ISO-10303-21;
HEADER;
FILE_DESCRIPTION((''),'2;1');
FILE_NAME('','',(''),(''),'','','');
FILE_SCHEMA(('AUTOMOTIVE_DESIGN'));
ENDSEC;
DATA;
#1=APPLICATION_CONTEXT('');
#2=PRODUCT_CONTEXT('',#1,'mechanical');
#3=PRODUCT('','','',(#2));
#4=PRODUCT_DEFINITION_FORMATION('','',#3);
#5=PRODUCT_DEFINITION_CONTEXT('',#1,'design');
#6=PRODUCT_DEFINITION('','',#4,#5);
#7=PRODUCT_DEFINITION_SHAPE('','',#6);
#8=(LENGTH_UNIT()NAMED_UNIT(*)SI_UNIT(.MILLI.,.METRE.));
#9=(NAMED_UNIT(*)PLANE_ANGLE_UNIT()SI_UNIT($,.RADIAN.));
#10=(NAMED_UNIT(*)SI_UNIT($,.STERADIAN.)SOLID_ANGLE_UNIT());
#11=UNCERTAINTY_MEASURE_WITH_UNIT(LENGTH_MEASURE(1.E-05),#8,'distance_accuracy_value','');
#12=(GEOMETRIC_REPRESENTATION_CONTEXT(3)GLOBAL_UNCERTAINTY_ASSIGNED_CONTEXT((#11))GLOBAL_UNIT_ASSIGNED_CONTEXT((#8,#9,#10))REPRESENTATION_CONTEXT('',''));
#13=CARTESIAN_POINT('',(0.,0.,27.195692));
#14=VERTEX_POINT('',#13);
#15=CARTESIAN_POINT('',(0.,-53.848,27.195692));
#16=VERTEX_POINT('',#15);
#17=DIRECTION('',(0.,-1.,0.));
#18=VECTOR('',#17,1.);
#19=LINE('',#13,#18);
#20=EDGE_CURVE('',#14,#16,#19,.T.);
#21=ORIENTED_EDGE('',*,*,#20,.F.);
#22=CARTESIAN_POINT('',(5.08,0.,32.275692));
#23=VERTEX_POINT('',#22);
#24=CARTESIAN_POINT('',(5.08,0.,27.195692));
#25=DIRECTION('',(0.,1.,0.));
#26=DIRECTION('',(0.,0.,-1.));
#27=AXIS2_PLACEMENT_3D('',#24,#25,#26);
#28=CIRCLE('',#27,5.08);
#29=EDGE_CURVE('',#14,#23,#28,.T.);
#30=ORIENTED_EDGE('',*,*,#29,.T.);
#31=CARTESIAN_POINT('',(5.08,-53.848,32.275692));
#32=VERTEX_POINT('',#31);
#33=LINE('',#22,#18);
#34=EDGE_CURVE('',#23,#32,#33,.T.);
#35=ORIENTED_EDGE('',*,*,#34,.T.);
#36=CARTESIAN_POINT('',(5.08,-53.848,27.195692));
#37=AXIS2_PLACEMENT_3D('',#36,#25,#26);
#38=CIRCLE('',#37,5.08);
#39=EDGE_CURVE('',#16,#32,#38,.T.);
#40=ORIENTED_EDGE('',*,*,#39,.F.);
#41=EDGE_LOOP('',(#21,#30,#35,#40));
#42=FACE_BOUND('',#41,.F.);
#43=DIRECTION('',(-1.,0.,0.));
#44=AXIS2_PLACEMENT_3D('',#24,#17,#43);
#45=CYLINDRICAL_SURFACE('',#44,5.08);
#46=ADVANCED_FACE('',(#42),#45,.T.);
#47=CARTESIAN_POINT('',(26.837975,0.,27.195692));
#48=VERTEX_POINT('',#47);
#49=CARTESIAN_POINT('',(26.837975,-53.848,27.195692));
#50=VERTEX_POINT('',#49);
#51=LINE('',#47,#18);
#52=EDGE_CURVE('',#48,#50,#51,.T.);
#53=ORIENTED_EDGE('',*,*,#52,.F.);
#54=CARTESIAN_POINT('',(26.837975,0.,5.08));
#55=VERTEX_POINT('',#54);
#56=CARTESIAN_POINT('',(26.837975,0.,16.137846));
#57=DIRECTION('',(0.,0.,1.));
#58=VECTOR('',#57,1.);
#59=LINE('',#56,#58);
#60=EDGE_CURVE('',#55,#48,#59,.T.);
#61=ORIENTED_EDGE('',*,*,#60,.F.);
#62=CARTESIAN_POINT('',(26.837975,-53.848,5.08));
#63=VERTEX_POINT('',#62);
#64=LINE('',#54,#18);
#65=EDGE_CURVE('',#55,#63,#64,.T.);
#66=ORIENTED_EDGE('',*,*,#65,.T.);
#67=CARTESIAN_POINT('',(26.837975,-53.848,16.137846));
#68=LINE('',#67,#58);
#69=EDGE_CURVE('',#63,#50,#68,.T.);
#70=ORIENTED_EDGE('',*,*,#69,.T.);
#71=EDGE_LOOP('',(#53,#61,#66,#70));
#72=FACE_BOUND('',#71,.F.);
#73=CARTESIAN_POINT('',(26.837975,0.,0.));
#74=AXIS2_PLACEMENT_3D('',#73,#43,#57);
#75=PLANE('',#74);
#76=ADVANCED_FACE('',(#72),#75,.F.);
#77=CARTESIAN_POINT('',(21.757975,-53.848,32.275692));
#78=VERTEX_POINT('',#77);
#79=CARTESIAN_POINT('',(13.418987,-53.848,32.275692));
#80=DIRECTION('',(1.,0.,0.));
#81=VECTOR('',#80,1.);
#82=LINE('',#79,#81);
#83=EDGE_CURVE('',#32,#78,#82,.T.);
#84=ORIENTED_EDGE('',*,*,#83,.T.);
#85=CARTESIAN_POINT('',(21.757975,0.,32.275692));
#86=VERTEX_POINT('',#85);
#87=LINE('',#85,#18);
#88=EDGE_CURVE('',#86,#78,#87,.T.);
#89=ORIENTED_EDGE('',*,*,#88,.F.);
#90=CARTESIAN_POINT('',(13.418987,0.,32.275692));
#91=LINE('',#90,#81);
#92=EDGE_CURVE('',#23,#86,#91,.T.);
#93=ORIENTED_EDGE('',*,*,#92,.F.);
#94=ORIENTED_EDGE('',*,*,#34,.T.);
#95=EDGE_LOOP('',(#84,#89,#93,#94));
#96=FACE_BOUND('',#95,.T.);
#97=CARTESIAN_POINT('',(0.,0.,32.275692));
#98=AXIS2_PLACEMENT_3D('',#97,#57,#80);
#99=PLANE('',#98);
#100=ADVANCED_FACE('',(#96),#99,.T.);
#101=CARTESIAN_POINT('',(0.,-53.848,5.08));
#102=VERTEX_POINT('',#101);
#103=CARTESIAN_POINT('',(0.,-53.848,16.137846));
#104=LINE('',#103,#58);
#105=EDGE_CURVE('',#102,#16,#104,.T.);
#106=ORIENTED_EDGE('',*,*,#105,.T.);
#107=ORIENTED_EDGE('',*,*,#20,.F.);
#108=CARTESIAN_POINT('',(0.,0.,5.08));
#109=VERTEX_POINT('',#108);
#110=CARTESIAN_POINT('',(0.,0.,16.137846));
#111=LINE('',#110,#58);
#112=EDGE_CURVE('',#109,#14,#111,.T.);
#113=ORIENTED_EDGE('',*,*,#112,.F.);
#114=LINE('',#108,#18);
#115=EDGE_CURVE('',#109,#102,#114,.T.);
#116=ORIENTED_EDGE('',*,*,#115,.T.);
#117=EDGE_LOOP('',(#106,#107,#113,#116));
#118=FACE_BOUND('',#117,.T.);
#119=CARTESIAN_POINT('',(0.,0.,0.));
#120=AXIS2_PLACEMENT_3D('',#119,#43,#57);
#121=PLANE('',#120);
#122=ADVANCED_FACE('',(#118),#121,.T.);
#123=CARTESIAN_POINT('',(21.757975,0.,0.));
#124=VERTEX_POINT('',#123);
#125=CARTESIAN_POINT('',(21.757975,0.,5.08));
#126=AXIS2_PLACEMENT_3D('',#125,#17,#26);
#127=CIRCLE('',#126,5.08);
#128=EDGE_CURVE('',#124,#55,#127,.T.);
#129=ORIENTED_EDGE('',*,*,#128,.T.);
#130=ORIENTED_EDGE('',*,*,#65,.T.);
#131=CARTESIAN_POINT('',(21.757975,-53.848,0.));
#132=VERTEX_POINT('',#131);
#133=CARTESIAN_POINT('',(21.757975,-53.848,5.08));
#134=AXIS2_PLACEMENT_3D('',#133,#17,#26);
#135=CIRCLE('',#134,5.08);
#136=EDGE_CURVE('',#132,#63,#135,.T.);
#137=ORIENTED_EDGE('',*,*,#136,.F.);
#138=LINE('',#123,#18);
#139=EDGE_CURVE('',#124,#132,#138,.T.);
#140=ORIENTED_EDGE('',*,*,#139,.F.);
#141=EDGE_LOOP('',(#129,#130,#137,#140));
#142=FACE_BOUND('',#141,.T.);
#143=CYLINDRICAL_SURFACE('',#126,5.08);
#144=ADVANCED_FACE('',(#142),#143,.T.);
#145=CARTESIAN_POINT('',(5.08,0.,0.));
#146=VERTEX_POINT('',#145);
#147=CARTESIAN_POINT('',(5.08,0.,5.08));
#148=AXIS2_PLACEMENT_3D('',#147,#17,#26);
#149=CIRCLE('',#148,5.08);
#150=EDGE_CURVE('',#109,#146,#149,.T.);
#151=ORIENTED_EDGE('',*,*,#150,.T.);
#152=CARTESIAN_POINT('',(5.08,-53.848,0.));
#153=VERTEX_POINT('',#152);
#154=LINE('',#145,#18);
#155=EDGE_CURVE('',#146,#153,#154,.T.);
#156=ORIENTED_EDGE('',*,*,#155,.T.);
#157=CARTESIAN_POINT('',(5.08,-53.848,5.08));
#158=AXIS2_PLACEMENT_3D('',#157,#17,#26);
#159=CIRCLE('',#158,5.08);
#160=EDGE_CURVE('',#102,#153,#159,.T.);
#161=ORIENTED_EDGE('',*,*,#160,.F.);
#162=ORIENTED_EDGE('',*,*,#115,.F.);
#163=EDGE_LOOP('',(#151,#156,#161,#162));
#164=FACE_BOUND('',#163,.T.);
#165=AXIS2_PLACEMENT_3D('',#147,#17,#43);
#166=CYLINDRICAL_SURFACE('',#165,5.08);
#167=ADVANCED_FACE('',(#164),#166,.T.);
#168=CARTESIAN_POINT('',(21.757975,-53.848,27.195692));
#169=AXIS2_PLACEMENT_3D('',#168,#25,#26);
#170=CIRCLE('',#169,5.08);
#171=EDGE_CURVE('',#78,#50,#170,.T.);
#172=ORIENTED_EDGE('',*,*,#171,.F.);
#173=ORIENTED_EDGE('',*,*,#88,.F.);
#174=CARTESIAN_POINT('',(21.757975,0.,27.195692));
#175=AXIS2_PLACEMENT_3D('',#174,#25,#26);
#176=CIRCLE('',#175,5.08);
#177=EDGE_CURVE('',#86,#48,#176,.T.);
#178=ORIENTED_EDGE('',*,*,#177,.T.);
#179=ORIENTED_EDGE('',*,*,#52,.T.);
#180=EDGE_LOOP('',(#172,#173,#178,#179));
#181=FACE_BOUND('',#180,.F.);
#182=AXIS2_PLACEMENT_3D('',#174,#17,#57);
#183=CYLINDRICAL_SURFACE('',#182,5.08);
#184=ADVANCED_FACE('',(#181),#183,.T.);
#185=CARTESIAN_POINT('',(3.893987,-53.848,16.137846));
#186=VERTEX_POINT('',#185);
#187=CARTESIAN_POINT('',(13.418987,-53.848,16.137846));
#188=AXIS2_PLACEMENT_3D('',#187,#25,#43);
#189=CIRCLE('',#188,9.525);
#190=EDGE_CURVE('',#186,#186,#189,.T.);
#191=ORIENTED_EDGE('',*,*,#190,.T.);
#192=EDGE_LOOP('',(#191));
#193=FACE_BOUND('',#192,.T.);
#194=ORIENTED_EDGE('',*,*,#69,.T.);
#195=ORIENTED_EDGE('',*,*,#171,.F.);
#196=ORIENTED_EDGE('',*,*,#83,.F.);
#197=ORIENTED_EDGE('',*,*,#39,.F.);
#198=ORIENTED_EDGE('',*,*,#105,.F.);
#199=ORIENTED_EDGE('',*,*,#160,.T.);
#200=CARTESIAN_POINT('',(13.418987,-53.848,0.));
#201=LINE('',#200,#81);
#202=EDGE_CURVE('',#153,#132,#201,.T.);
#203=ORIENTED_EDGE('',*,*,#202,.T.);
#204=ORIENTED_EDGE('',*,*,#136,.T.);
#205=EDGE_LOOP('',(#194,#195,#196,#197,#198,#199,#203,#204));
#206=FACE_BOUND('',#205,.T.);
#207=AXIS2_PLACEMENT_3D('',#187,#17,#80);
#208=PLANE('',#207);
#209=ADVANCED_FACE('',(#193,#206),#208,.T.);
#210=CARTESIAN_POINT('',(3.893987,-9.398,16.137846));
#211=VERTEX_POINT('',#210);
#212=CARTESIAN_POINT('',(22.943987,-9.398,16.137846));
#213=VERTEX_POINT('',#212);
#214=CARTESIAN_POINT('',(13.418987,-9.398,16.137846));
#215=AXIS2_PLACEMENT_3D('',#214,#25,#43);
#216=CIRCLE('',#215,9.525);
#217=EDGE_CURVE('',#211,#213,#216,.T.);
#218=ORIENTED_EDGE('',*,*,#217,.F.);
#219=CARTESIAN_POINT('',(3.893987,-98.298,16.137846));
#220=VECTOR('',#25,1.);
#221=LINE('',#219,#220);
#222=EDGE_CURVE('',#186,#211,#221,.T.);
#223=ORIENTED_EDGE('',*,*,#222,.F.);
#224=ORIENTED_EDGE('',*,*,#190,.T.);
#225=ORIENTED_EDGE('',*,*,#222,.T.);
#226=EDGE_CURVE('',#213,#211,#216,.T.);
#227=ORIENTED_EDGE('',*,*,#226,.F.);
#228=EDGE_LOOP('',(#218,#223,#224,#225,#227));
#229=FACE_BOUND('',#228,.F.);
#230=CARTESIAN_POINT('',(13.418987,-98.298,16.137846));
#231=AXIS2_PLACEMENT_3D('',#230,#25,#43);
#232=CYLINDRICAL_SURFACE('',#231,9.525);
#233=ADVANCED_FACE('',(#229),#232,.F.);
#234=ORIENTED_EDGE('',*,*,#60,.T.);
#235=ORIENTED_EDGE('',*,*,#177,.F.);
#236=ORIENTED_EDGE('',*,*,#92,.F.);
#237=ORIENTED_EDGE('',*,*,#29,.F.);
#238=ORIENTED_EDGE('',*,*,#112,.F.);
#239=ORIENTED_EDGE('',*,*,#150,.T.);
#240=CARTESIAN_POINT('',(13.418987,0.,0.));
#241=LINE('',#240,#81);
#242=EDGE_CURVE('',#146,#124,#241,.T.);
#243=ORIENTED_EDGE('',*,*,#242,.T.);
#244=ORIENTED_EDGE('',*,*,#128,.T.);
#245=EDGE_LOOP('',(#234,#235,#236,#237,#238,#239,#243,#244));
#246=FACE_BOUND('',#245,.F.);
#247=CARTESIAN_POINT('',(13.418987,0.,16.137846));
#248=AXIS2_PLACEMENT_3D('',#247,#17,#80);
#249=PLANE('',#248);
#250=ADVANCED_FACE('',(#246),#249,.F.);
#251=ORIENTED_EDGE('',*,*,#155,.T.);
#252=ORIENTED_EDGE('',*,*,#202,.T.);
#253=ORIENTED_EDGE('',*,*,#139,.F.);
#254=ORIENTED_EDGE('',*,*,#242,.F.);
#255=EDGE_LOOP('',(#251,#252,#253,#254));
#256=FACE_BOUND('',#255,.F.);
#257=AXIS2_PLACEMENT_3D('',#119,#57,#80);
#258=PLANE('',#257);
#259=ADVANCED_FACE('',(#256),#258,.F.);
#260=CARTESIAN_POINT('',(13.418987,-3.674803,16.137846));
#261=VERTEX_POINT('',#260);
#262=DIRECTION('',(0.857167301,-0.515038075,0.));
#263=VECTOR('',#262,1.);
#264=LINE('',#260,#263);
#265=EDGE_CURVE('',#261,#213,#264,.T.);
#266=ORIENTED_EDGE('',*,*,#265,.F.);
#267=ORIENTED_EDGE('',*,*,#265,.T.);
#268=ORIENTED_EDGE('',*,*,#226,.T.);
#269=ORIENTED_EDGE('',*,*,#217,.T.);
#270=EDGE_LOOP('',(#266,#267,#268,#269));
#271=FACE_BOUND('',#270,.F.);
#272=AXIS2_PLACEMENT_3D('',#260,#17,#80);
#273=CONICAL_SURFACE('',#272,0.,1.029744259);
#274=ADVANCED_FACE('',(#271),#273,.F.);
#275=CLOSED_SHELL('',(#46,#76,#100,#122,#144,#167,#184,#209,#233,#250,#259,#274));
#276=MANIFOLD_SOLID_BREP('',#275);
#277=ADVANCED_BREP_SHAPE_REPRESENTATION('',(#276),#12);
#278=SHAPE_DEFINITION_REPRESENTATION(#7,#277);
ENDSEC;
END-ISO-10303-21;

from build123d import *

# Parameters (mm, degrees)
F0_W     = 26.8379747868
F0_H     = 32.2756916285
F1_DEPTH = 53.848
F2_R     = 10.4478277996
F3_DEPTH = 43.688
F7_D     = 19.05
F7_DEPTH = 44.45
F7_TIP   = 5.7231973962
F8_R     = 5.08


# Not quite as in the source:
# - the program builds the solid bodies; features that only make, move or delete a surface that nothing else refers to are left out


with BuildPart() as f1:
    # F0 (on Front) → F1 (new body)
    with BuildSketch(Plane.XZ):
        with Locations((13.4189873934, 16.1378458142)):
            Rectangle(F0_W, F0_H)
    extrude(amount=F1_DEPTH)

    # F2 (on face) → F3 (join)
    with BuildSketch(Plane.XZ.offset(53.848)):
        with Locations((11.908470653, 14.5087121055)):
            Circle(F2_R)
    extrude(amount=-F3_DEPTH)

    # F7
    with Locations(Plane.XZ.offset(53.848)):
        with Locations((13.4189873934, 16.1378458142)):
            Hole(F7_D / 2, depth=F7_DEPTH)
            with Locations((0, 0, -(F7_DEPTH + F7_TIP / 2))):  # 118° drill point
                Cone(0, F7_D / 2, F7_TIP, mode=Mode.SUBTRACT)

    # F8
    f8_edges = [f1.edges().sort_by_distance(p)[0] for p in [
        (0, -26.924, 32.275692),
        (26.837975, -26.924, 32.275692),
        (26.837975, -26.924, 0),
        (0, -26.924, 0),
    ]]
    fillet(f8_edges, radius=F8_R)


solid = f1.part
